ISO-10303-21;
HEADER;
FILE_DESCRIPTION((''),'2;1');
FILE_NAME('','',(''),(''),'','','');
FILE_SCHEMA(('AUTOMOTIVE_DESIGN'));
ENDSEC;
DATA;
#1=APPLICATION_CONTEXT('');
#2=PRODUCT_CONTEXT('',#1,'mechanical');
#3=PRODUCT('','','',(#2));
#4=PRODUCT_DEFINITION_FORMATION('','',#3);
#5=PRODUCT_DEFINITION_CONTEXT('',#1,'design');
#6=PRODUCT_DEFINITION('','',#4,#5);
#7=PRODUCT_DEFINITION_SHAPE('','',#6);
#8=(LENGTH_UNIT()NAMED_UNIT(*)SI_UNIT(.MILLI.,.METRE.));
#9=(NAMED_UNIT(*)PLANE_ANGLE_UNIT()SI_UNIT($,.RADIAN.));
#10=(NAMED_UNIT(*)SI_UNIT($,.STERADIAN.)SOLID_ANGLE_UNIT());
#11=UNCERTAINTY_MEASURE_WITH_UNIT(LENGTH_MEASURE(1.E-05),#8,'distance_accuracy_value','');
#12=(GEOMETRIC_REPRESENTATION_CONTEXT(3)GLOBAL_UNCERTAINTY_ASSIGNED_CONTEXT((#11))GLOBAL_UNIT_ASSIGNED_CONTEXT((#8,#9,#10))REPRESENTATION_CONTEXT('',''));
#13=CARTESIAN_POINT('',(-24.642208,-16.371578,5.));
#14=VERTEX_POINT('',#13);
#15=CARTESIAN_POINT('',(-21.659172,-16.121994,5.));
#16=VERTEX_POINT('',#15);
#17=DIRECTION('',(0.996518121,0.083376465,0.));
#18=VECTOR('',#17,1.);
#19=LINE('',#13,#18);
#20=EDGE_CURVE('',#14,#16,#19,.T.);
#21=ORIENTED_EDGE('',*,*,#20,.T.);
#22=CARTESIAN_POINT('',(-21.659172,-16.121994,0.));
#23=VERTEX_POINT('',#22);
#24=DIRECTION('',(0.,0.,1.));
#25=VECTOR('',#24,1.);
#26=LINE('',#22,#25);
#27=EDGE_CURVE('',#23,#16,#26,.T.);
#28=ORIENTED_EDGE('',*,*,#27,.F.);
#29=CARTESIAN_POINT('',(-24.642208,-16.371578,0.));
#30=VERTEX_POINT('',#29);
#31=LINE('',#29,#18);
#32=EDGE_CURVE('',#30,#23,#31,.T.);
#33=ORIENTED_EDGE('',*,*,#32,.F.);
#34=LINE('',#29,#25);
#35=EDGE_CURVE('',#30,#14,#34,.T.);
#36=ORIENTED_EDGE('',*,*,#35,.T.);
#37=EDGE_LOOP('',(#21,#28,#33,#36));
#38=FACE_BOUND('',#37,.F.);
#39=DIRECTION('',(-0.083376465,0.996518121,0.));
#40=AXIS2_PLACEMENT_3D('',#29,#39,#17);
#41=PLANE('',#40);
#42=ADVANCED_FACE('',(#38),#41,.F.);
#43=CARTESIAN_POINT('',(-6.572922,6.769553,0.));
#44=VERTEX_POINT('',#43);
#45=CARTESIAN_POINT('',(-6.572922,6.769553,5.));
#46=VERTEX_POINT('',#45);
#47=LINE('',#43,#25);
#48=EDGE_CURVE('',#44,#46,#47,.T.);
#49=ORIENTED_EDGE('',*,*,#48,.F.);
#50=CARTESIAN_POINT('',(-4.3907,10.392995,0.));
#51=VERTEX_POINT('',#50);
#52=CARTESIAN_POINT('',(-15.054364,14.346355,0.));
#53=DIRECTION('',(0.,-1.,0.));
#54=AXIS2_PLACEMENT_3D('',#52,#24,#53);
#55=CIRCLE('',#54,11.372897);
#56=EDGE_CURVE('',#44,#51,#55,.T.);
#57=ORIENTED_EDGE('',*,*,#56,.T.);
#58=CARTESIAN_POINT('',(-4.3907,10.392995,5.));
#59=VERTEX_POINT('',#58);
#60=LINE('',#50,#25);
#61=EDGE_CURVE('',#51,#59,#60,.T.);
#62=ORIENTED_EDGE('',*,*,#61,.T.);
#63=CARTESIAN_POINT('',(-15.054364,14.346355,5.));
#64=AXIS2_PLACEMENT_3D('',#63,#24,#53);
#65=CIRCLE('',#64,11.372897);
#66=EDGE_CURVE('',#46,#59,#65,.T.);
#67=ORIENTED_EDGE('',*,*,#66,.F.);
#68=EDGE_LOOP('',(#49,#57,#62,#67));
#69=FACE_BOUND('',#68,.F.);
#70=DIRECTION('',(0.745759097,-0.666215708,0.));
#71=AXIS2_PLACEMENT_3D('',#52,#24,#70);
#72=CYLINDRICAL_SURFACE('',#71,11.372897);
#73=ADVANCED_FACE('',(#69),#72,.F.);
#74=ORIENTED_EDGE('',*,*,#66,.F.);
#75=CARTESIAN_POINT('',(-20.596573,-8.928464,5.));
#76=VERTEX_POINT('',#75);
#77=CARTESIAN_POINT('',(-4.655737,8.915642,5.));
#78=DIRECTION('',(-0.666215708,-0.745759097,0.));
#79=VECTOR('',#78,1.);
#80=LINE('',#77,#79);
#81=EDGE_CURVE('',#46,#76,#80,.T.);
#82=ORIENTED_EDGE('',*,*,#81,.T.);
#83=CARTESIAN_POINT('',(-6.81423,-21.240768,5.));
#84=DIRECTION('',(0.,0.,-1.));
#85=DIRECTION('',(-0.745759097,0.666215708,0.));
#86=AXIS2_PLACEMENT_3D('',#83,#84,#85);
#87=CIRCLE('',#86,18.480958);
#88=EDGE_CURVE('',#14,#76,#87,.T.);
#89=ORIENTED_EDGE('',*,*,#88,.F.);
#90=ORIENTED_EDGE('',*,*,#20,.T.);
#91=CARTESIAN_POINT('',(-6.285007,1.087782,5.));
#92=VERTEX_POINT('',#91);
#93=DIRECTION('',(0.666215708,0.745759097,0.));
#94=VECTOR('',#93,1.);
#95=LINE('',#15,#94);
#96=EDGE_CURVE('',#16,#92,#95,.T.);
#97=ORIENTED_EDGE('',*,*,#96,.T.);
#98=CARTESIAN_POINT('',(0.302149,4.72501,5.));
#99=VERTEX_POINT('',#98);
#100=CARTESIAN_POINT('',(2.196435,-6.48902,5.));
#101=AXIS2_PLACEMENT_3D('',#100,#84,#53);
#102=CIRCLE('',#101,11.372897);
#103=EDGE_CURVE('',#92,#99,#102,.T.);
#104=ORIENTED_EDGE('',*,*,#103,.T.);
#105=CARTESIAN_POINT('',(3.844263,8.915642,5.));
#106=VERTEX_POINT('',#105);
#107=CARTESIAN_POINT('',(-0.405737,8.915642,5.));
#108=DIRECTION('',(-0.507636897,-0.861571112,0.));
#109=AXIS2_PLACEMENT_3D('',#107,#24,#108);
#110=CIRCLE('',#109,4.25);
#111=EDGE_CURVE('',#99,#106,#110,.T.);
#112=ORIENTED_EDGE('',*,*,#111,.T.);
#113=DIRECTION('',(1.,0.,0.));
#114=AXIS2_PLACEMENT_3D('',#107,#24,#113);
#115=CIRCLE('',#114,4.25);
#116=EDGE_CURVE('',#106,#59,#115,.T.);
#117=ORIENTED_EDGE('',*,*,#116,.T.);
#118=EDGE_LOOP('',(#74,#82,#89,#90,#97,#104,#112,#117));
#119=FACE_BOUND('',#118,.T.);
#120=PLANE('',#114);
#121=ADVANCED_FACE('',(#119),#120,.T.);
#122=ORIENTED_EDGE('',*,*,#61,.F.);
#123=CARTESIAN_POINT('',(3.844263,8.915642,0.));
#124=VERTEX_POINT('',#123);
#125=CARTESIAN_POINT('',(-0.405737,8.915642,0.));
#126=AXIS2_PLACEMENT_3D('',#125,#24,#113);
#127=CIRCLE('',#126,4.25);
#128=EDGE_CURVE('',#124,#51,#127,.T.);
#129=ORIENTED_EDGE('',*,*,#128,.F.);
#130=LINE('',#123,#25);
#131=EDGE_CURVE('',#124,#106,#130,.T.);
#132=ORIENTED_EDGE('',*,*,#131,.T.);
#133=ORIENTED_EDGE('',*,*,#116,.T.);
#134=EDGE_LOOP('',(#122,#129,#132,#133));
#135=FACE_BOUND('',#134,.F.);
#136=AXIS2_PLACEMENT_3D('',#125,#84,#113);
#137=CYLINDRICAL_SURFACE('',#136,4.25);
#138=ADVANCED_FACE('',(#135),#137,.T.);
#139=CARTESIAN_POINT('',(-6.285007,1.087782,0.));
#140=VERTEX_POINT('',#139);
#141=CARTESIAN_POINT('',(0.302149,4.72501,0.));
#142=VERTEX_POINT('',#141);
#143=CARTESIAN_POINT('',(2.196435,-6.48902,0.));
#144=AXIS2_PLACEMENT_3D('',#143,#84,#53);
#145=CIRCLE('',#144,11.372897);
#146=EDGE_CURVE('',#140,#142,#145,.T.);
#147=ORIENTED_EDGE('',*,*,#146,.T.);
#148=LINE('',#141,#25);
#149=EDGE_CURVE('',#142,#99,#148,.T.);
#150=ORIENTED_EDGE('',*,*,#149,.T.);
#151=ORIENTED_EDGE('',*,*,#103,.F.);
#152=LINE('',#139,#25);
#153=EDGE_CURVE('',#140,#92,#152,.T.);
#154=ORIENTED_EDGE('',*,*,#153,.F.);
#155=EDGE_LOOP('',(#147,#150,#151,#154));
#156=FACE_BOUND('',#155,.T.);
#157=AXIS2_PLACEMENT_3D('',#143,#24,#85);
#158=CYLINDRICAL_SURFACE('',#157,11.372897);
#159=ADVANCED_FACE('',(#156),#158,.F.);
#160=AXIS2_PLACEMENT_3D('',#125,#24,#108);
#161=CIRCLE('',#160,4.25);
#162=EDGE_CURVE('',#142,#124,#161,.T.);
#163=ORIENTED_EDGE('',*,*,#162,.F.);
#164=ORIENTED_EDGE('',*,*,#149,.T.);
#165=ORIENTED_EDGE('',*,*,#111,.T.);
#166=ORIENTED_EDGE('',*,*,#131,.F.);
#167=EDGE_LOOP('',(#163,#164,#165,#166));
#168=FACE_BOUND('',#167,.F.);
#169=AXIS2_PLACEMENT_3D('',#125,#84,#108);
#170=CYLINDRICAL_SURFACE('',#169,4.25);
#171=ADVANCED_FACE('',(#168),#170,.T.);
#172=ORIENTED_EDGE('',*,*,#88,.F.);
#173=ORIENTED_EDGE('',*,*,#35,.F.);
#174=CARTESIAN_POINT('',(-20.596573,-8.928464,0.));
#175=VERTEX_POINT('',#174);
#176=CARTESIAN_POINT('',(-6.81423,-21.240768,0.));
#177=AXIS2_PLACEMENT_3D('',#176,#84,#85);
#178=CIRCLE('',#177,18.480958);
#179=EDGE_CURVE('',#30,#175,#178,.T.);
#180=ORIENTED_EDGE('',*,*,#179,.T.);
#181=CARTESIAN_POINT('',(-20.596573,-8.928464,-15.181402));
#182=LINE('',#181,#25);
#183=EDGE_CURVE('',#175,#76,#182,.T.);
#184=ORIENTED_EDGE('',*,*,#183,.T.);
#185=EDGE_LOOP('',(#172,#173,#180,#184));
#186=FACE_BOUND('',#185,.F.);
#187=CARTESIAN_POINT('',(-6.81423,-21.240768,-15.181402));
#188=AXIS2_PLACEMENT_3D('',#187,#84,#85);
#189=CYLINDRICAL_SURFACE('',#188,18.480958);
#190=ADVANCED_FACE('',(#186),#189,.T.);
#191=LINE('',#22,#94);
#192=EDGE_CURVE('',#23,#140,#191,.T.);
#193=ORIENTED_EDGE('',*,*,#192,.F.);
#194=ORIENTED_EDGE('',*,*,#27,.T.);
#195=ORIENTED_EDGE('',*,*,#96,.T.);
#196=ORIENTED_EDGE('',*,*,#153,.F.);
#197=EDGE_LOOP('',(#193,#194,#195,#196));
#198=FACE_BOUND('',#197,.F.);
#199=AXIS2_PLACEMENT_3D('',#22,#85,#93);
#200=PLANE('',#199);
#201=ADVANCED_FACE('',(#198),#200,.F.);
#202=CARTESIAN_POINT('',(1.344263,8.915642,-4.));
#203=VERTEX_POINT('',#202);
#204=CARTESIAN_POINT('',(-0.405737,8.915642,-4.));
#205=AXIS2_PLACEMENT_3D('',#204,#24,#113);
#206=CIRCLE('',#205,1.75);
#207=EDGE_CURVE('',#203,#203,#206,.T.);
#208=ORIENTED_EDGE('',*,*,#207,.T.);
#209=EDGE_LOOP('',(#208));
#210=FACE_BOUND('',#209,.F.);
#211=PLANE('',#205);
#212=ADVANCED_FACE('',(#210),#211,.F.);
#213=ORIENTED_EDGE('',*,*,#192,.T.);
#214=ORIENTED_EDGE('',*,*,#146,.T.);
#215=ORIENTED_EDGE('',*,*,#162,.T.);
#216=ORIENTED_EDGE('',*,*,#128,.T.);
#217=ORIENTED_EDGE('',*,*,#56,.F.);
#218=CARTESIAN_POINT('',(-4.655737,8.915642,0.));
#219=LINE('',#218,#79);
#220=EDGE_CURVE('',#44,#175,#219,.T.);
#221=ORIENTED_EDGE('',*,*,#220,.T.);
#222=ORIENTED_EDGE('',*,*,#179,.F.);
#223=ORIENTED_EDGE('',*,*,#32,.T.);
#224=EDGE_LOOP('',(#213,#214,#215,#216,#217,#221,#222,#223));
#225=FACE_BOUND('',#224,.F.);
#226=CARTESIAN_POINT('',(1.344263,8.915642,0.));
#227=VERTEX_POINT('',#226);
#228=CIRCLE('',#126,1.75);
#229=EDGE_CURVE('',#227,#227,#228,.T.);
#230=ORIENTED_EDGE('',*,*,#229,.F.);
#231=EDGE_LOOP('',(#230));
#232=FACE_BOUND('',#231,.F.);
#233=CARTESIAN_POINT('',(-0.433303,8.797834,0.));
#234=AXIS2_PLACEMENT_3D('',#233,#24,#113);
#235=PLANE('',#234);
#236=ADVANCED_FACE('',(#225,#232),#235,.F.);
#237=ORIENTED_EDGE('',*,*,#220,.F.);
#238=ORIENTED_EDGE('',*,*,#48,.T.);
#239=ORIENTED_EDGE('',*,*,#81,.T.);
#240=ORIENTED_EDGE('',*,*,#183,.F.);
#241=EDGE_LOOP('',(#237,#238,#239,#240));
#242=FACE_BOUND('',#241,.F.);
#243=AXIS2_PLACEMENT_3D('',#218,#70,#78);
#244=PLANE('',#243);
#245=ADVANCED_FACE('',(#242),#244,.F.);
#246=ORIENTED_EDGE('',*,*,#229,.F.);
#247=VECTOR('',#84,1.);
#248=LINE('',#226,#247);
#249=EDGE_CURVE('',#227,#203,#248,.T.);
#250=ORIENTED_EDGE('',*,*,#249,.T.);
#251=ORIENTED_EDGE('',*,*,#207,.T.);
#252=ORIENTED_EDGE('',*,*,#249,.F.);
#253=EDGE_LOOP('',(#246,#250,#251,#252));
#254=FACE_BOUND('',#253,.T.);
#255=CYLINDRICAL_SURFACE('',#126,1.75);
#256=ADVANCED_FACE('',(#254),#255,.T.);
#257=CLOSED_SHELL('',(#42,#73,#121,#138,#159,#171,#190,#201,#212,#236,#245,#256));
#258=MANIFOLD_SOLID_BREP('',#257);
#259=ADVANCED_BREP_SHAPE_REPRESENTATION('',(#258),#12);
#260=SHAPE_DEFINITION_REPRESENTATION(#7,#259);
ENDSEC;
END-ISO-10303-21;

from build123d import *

# Parameters (mm, degrees)
F0_R          = 1.75
F1_DEPTH      = 5
F2_DEPTH      = 4
F2_DEPTH_BACK = 5
F3_T1_DEPTH   = 35.3628033386
F4_R          = 11.3728971787


# Not quite as in the source:
# - a fillet or chamfer that OpenCascade refuses, or shapes differently, is made with other operations: its cross-section is extruded or revolved along the edge and cut away or added


with BuildPart() as f1:
    # F0 (on Top) → F1 (new body)
    with BuildSketch(Plane.XY):
        with BuildLine():
            ThreePointArc((-2.5631937321, 5.253964594), (1.7029722297, 5.2256762725), (3.8442630819, 8.9156418184))
            ThreePointArc((3.8442630819, 8.9156418184), (-0.4057369181, 13.1656418184), (-4.6557369181, 8.9156418184))
            ThreePointArc((-4.6557369181, 8.9156418184), (-4.095702464, 6.8069326705), (-2.5631937321, 5.253964594))
        make_face()
        with Locations((-0.4057369181, 8.9156418184)):
            Circle(F0_R, mode=Mode.SUBTRACT)
        with BuildLine():
            ThreePointArc((-2.5631937321, 5.253964594), (-4.095702464, 6.8069326705), (-4.6557369181, 8.9156418184))
            Line((-4.6557369181, 8.9156418184), (-24.6422081436, -13.4571310977))
            Line((-24.6422081436, -13.4571310977), (-21.6591717548, -16.1219939277))
            Line((-21.6591717548, -16.1219939277), (-2.5631937321, 5.253964594))
        make_face()
        Polygon((-21.6591717548, -16.1219939277), (-24.6422081436, -13.4571310977), (-24.6422081436, -16.1219939277), (-24.6422081436, -16.3715779781), align=None)
    extrude(amount=F1_DEPTH)

    # F0 (on Top) → F2 (join, two sides)
    with BuildSketch(Plane.XY) as f2_sk:
        with Locations((-0.4057369181, 8.9156418184)):
            Circle(F0_R)
    extrude(amount=-F2_DEPTH)
    extrude(f2_sk.sketch, amount=F2_DEPTH_BACK)

    # F3: fillet of radius 18.4809579153 on 1 edges, made by hand

    # F3_s2 → F3_t1 (cut)
    with BuildSketch(Plane.XY.offset(-15.1814016693)):
        with BuildLine():
            ThreePointArc((-20.5965728419, -8.9284637364), (-23.0516277567, -12.4150823252), (-24.6422081436, -16.3715779781))
            Line((-24.6422081436, -16.3715779781), (-24.6422081436, -13.4571310977))
            Line((-24.6422081436, -13.4571310977), (-20.5965728419, -8.9284637364))
        make_face()
    extrude(amount=F3_T1_DEPTH, mode=Mode.SUBTRACT)

    # F4
    f4_edges = [f1.edges().sort_by_distance(p)[0] for p in [
        (-2.563194, 5.253965, 2.5),
        (-4.655737, 8.915642, 2.5),
    ]]
    fillet(f4_edges, radius=F4_R)


solid = f1.part
